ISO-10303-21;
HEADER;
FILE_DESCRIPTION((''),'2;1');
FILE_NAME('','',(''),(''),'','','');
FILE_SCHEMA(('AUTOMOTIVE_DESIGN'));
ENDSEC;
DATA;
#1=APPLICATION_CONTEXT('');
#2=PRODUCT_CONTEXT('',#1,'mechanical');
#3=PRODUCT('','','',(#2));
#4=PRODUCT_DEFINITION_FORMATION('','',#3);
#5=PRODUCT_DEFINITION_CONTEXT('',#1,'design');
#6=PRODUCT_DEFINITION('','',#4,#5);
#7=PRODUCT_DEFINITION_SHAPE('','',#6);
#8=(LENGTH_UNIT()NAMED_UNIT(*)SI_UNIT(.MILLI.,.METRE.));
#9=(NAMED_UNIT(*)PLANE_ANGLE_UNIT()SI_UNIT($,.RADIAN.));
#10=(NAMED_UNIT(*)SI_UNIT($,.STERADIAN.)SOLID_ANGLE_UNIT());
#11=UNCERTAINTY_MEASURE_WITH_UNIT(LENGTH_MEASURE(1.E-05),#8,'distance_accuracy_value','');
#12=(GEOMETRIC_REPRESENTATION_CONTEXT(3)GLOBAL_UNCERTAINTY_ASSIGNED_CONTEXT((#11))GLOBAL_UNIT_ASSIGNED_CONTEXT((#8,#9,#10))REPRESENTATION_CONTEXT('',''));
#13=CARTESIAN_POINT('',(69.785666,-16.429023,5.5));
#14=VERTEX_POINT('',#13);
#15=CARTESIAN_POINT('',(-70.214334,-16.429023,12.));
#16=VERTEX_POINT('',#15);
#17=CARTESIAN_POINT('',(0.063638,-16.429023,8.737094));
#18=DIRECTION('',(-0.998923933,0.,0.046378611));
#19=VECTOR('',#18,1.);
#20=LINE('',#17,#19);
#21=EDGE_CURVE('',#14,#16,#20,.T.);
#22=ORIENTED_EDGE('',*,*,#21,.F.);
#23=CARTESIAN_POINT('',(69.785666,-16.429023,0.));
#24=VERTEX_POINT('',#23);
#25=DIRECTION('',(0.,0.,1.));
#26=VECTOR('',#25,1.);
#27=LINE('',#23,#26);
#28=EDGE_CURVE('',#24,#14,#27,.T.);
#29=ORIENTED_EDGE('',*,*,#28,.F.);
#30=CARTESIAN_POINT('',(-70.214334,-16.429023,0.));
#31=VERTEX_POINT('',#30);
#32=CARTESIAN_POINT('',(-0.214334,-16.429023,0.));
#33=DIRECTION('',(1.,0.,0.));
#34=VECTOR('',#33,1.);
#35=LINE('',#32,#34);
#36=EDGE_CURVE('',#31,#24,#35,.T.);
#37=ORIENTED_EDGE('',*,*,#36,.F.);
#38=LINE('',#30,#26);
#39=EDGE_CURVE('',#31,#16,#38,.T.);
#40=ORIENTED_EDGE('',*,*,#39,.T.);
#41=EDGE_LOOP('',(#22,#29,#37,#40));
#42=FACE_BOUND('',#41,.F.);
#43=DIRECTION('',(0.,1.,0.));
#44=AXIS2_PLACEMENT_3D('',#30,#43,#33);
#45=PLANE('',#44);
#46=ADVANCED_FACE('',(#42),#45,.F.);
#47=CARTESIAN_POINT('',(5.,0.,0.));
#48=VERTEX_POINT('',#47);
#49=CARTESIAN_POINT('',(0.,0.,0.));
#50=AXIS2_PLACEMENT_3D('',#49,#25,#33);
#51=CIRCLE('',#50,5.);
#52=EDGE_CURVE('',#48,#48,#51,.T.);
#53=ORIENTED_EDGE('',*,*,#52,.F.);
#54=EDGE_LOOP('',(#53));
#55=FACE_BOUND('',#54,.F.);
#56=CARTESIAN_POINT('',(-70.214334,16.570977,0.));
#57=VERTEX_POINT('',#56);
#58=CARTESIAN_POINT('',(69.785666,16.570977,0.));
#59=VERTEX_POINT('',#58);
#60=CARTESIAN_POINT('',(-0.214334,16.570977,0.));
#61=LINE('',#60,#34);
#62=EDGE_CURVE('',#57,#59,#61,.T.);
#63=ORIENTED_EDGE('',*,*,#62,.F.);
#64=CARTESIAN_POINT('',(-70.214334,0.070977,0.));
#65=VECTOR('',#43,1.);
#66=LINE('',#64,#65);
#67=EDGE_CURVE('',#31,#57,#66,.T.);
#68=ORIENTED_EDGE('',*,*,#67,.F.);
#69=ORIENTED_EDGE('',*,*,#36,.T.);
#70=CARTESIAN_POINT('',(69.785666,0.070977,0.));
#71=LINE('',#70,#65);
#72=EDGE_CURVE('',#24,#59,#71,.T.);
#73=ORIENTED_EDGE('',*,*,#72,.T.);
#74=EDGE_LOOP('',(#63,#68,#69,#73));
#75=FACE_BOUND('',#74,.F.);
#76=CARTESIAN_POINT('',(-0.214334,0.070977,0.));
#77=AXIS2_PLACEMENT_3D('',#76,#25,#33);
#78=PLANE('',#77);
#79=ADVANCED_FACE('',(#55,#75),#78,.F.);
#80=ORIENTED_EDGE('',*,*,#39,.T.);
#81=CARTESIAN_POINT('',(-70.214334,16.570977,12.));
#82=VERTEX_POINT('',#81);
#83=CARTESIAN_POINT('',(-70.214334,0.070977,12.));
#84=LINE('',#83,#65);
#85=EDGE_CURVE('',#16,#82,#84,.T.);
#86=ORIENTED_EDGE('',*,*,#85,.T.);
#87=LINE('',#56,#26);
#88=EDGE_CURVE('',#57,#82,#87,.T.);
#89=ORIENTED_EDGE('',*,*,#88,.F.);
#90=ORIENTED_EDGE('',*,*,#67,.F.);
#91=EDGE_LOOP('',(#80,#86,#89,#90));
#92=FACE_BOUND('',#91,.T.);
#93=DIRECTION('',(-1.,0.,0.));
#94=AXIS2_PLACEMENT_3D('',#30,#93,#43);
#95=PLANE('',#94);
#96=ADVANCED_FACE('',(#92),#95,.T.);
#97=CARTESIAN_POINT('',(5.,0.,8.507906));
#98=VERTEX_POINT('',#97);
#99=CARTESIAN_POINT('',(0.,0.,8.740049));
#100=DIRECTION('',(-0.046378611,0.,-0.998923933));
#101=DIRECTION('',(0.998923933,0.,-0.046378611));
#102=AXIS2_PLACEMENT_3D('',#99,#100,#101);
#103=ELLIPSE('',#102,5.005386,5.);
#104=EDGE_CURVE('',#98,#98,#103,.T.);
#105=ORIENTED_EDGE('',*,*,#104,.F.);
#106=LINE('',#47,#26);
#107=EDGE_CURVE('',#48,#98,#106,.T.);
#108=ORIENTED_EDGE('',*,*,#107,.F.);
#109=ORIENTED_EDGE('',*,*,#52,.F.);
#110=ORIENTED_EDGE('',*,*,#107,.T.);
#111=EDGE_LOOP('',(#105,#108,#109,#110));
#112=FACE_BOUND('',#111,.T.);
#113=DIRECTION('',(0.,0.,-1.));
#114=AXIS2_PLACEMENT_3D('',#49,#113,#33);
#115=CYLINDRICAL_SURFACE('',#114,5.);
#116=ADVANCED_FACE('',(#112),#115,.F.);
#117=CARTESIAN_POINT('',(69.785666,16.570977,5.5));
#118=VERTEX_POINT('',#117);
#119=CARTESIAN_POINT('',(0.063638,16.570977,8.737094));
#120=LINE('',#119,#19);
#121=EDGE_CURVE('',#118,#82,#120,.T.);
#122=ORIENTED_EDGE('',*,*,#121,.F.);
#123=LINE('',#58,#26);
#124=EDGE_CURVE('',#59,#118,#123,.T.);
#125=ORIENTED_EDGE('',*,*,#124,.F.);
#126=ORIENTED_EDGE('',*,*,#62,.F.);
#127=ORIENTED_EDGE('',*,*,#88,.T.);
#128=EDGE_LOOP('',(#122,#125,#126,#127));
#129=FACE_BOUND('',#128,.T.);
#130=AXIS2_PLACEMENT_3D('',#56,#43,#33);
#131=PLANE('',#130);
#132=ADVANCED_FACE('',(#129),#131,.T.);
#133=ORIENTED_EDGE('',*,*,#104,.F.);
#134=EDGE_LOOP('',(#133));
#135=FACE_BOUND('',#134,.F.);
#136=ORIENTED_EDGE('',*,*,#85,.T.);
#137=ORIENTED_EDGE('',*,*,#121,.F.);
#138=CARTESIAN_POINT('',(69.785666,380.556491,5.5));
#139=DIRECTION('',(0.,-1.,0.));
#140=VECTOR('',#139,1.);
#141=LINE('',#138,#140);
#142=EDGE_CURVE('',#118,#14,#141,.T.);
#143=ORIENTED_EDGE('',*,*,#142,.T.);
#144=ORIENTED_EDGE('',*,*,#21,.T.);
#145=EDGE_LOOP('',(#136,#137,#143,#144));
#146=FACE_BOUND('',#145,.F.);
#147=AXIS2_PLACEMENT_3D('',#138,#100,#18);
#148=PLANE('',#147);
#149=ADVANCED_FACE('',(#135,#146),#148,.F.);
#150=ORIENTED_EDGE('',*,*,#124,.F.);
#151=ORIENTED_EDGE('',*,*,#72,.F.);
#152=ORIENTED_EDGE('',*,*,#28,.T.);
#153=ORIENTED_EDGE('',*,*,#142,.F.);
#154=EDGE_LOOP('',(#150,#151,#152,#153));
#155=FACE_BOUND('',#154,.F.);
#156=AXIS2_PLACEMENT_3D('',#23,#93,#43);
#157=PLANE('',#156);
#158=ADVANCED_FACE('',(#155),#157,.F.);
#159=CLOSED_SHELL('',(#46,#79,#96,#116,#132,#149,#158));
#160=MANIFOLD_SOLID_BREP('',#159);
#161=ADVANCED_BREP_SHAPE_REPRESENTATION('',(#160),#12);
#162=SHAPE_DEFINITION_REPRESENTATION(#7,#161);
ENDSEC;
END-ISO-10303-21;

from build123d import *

# Parameters (mm, degrees)
F0_W        = 140
F0_H        = 33
F0_R        = 5
F1_DEPTH    = 12
F2_T1_DEPTH = 760.9710283957


# Not quite as in the source:
# - a fillet or chamfer that OpenCascade refuses, or shapes differently, is made with other operations: its cross-section is extruded or revolved along the edge and cut away or added


with BuildPart() as f1:
    # F0 (on Top) → F1 (new body)
    with BuildSketch(Plane.XY):
        with Locations((-0.2143342793, 0.0709771141)):
            Rectangle(F0_W, F0_H)
        Circle(F0_R, mode=Mode.SUBTRACT)
    extrude(amount=F1_DEPTH)

    # F2: chamfer of 6.5 x 140 on 1 edges, made by hand

    # F2_s2 → F2_t1 (cut)
    with BuildSketch(Plane.XZ.offset(-380.556491312)):
        Polygon((69.7856657207, 5.5), (-70.2143342793, 12), (69.7856657207, 12), align=None)
    extrude(amount=F2_T1_DEPTH, mode=Mode.SUBTRACT)


solid = f1.part
